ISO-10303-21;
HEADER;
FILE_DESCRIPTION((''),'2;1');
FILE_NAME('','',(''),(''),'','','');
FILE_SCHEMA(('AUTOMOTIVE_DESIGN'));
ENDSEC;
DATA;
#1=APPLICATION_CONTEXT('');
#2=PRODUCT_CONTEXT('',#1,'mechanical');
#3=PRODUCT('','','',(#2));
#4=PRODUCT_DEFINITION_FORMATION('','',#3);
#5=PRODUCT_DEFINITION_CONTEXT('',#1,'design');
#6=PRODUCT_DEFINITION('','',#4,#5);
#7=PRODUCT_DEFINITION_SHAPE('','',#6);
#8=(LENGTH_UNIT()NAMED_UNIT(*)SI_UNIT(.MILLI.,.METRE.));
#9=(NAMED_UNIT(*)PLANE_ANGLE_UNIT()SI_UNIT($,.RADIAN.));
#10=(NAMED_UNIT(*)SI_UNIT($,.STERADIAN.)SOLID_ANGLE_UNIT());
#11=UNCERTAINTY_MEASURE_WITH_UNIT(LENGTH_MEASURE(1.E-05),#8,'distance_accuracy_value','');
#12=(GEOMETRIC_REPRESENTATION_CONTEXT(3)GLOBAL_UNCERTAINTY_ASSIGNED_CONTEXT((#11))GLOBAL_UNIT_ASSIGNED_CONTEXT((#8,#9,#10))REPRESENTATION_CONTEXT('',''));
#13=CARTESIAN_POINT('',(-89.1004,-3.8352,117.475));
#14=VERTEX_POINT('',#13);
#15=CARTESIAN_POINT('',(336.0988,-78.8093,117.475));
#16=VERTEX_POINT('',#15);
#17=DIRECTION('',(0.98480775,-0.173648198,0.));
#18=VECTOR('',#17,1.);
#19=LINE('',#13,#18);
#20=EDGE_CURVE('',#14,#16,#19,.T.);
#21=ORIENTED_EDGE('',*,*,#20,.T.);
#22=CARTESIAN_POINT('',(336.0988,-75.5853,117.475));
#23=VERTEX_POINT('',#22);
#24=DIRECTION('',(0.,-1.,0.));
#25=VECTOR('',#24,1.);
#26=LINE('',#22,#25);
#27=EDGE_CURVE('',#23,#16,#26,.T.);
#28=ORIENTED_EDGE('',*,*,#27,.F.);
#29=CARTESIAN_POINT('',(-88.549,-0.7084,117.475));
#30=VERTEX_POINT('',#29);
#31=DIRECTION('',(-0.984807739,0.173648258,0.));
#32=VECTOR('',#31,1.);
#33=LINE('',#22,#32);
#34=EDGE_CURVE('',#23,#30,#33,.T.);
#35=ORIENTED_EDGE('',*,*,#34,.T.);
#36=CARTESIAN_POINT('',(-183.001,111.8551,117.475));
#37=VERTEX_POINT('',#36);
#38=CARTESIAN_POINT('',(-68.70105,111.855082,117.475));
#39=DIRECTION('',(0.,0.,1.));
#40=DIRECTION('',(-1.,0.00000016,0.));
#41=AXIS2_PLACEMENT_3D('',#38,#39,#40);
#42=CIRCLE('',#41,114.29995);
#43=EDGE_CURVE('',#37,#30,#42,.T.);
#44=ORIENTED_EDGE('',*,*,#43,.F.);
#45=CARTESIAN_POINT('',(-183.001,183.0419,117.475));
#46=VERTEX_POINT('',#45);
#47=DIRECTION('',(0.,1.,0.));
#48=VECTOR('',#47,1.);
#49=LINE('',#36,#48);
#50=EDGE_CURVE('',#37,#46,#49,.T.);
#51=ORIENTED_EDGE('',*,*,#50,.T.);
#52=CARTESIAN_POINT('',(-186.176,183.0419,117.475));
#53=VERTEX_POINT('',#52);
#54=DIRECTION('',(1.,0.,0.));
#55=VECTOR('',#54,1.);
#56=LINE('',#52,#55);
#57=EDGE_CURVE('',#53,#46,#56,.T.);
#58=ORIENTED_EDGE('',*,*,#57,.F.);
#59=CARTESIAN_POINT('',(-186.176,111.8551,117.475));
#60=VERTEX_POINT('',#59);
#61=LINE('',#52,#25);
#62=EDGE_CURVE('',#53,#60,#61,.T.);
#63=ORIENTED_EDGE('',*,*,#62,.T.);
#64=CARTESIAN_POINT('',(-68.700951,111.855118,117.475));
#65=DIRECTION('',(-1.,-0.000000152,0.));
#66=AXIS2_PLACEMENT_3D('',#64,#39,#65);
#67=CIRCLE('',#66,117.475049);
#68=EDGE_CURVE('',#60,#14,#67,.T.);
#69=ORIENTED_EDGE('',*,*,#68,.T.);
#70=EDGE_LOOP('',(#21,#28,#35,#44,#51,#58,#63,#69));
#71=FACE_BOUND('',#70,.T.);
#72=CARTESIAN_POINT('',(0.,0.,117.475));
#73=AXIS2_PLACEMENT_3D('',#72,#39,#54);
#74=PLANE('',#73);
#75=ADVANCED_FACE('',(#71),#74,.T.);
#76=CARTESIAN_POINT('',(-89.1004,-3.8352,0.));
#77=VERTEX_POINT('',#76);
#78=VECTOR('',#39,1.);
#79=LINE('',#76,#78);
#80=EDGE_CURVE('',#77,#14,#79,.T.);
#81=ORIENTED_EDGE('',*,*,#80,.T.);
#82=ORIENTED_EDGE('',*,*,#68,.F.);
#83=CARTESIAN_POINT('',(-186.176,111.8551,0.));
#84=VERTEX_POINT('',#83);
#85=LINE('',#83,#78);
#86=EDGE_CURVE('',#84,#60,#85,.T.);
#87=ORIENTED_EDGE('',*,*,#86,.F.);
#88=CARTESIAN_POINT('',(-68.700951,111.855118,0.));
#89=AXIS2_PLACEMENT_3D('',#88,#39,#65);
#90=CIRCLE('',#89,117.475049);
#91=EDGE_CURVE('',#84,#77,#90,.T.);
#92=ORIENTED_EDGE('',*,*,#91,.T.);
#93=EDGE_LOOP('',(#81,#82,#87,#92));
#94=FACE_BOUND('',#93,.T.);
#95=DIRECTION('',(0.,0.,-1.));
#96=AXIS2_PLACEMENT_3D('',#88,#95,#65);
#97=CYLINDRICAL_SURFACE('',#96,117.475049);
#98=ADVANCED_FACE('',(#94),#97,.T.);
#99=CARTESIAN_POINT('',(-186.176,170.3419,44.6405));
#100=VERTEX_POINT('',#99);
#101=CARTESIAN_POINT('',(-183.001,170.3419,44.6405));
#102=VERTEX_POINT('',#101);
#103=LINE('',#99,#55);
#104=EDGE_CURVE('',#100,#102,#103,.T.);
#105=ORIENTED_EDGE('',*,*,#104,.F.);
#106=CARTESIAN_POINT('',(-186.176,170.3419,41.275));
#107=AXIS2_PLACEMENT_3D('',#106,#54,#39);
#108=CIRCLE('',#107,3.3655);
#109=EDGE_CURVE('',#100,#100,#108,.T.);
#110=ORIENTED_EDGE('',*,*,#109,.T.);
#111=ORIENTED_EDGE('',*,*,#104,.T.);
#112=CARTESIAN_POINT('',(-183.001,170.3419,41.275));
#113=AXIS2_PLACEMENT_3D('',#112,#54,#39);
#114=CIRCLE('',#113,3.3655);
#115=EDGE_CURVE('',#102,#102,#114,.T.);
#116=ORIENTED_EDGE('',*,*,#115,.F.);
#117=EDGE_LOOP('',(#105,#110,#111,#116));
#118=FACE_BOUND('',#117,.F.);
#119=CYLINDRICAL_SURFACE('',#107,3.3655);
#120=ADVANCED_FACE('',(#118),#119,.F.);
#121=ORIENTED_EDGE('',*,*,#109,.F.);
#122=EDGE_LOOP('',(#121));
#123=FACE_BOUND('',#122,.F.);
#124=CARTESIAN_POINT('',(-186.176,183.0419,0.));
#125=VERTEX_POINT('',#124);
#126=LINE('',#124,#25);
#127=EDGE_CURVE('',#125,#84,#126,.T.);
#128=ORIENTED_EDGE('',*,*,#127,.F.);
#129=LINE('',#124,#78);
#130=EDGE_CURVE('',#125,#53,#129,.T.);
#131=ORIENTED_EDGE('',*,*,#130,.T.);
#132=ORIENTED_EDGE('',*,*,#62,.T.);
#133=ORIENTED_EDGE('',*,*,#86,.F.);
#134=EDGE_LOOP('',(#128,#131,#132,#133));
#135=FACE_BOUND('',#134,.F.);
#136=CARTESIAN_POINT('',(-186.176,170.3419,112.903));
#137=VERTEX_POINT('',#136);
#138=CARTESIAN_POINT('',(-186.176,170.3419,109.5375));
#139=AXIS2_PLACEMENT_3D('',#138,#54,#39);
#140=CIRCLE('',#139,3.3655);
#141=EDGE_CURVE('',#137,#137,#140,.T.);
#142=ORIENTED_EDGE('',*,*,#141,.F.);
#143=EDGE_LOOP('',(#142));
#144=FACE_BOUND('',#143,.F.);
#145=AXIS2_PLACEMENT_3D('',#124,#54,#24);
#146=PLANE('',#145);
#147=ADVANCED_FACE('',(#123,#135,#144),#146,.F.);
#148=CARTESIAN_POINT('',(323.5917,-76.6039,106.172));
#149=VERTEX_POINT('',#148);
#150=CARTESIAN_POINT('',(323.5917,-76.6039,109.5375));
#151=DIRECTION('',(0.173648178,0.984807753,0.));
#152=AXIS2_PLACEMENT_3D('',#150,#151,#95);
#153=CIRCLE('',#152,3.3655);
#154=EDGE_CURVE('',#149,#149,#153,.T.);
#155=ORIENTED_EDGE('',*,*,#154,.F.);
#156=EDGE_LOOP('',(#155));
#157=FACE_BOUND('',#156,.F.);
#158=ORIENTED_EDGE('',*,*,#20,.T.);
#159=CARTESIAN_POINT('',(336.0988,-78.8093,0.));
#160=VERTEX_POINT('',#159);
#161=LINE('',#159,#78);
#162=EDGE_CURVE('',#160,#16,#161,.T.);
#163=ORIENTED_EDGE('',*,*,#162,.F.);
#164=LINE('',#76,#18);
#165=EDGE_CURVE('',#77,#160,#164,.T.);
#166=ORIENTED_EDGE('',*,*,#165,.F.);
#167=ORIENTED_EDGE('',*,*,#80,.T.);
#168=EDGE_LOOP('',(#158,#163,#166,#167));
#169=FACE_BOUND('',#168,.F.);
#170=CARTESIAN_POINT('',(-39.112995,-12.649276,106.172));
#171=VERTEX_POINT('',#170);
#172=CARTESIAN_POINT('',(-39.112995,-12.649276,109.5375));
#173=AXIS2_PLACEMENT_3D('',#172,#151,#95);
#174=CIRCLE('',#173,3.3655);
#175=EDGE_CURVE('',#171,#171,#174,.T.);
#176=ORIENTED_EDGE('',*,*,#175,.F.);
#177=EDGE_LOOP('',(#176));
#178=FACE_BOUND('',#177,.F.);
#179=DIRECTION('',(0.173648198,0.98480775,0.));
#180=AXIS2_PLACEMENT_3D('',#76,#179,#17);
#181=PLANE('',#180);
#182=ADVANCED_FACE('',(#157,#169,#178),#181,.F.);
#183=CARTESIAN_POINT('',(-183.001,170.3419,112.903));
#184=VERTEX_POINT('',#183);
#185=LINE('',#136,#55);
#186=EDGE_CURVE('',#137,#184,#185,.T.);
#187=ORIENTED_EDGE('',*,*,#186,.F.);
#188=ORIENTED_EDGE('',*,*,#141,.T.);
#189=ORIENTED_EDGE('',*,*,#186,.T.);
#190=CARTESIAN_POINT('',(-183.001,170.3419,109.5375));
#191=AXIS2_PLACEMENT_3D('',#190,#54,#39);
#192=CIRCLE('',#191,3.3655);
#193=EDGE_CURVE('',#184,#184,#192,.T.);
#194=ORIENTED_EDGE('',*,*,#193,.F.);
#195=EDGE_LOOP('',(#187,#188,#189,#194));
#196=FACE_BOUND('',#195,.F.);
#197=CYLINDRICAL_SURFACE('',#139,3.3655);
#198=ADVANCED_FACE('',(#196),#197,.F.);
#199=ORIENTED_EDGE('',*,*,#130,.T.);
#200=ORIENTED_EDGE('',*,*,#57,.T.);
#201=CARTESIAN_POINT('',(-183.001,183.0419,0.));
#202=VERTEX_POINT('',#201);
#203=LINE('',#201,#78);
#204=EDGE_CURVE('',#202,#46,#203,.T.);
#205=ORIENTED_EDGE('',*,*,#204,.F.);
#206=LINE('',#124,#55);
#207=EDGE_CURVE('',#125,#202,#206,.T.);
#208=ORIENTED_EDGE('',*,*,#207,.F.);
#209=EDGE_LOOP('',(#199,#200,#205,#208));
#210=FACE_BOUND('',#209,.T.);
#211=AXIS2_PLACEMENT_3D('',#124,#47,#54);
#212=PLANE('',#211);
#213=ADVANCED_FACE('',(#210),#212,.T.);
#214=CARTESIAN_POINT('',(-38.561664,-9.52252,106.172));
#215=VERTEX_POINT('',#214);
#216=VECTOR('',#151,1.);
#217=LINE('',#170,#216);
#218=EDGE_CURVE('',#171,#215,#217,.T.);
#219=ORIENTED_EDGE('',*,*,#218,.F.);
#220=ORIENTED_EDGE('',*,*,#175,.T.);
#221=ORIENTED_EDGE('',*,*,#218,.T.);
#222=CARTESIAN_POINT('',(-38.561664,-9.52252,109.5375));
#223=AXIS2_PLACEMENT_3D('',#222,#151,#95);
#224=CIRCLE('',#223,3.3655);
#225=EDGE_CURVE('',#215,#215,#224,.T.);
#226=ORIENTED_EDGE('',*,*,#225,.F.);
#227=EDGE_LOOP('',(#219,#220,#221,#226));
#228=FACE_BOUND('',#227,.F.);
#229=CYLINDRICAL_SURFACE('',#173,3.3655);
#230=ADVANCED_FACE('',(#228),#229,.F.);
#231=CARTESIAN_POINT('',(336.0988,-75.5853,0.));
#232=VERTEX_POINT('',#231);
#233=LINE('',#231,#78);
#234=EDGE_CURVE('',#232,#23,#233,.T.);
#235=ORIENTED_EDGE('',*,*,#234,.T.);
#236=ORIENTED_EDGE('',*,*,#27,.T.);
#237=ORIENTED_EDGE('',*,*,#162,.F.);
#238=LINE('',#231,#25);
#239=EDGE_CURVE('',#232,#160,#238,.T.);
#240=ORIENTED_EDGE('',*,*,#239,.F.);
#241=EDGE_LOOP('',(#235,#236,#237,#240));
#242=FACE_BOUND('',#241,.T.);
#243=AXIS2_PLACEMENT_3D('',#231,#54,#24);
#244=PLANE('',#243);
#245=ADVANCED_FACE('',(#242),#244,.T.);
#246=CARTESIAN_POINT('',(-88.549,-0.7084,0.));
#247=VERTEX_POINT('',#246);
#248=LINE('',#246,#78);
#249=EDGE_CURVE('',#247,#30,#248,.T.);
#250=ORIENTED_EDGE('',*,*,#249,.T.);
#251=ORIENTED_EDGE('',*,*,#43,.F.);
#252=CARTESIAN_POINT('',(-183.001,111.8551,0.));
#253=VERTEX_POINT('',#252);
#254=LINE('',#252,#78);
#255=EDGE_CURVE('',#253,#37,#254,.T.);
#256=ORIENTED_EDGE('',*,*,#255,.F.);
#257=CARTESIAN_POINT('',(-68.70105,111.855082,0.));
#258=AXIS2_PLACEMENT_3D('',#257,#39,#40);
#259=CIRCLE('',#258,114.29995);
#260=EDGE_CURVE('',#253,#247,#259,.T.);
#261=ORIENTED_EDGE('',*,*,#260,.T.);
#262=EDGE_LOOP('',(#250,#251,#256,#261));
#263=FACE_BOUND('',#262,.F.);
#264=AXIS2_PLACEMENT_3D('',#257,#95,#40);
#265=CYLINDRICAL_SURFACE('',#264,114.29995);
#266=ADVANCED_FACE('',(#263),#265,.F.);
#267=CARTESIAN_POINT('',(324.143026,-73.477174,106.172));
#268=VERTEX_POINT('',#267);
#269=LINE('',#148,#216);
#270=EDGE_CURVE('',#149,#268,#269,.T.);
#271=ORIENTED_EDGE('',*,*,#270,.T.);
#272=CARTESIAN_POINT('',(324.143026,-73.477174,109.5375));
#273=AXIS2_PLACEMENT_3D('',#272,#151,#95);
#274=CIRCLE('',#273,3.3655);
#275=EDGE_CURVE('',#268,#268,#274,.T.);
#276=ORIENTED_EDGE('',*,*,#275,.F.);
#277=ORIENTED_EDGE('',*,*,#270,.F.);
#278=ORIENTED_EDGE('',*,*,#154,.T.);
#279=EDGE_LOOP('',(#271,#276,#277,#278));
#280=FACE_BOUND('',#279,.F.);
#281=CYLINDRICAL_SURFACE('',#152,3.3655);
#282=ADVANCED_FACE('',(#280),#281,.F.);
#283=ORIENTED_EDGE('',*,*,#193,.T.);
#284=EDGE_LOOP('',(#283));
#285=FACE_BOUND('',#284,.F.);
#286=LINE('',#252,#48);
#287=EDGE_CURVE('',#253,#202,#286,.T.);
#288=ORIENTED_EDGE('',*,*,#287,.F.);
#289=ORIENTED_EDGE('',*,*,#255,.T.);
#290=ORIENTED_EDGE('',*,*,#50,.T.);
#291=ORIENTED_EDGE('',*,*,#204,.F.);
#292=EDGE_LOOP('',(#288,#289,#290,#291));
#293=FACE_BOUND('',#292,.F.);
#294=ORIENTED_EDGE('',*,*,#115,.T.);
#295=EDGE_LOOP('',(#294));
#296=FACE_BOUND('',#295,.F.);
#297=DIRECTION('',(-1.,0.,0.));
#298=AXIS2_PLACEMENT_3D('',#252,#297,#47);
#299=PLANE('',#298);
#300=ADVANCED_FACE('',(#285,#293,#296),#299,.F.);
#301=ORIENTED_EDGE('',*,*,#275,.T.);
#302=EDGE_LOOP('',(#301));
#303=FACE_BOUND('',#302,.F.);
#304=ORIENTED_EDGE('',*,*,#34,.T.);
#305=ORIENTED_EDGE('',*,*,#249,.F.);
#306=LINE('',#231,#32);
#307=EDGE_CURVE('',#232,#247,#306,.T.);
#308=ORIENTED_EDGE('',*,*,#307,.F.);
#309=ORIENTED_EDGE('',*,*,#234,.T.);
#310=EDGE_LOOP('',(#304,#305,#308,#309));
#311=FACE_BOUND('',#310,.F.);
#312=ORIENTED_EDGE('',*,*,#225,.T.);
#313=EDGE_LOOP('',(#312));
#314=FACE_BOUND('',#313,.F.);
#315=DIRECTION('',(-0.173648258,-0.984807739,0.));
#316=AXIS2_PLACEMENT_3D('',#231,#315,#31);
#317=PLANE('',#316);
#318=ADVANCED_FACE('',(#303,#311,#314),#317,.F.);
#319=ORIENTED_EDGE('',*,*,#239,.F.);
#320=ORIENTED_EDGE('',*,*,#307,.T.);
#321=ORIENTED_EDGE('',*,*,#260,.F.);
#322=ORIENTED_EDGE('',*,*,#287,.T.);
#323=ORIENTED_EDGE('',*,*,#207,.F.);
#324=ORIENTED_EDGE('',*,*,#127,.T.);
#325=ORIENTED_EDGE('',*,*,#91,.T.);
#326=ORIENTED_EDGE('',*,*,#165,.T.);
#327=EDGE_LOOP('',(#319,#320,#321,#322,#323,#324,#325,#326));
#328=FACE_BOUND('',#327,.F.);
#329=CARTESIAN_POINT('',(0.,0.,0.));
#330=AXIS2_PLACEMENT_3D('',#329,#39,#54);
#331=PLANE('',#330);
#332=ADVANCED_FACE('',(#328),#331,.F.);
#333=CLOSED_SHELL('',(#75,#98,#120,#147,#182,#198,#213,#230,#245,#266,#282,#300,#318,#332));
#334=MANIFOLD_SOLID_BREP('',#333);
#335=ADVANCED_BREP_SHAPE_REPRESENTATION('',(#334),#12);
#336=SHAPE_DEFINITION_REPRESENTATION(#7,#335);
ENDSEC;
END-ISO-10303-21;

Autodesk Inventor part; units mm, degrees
ref_plane "YZ Plane" through (0, 0, 0) normal (1, 0, 0) x (0, 1, 0)
ref_plane "XZ Plane" through (0, 0, 0) normal (0, 1, 0) x (-1, 0, 0)
ref_plane "XY Plane" through (0, 0, 0) normal (0, 0, 1) x (1, 0, 0)
sketch "Sketch1" plane through (0, 0, 0) normal (0, 0, 1) x (1, 0, 0)
  line L0 (-89.1004, -3.8352) -> (336.0988, -78.8093) projected
  line L1 (336.0988, -75.5853) -> (336.0988, -78.8093) projected
  line L2 (336.0988, -75.5853) -> (-88.549, -0.7084) projected
  line L3 (-183.001, 111.8551) -> (-183.001, 183.0419) projected
  line L4 (-186.176, 183.0419) -> (-183.001, 183.0419) projected
  line L5 (-186.176, 183.0419) -> (-186.176, 111.8551) projected
  arc A0 (-186.176, 111.8551) -> (-89.1004, -3.8352) centre (-68.701, 111.8551) ccw projected
  arc A1 (-183.001, 111.8551) -> (-88.549, -0.7084) centre (-68.701, 111.8551) ccw projected
  point P0 (0, 0)
extrude "Extrusion1" add sketch "Sketch1" along normal blind 117.475
hole "Hole1" at (-186.176, 170.3419, 109.5375) direction (1, 0, 0) diameter 6.731 depth 25.4 tip angle 118
pattern_linear "Rectangular Pattern1" count 2 spacing 68.2625 along (0, 0, -1) of "Hole1"
hole "Hole2" at (323.5917, -76.6039, 109.5375) direction (0.1736482, 0.9848078, 0) diameter 6.731 depth 25.4 tip angle 118
pattern_linear "Rectangular Pattern2" count 2 spacing 368.3 along (-0.9848078, 0.1736482, 0) of "Hole2"
properties part number "GE-12086-02"
